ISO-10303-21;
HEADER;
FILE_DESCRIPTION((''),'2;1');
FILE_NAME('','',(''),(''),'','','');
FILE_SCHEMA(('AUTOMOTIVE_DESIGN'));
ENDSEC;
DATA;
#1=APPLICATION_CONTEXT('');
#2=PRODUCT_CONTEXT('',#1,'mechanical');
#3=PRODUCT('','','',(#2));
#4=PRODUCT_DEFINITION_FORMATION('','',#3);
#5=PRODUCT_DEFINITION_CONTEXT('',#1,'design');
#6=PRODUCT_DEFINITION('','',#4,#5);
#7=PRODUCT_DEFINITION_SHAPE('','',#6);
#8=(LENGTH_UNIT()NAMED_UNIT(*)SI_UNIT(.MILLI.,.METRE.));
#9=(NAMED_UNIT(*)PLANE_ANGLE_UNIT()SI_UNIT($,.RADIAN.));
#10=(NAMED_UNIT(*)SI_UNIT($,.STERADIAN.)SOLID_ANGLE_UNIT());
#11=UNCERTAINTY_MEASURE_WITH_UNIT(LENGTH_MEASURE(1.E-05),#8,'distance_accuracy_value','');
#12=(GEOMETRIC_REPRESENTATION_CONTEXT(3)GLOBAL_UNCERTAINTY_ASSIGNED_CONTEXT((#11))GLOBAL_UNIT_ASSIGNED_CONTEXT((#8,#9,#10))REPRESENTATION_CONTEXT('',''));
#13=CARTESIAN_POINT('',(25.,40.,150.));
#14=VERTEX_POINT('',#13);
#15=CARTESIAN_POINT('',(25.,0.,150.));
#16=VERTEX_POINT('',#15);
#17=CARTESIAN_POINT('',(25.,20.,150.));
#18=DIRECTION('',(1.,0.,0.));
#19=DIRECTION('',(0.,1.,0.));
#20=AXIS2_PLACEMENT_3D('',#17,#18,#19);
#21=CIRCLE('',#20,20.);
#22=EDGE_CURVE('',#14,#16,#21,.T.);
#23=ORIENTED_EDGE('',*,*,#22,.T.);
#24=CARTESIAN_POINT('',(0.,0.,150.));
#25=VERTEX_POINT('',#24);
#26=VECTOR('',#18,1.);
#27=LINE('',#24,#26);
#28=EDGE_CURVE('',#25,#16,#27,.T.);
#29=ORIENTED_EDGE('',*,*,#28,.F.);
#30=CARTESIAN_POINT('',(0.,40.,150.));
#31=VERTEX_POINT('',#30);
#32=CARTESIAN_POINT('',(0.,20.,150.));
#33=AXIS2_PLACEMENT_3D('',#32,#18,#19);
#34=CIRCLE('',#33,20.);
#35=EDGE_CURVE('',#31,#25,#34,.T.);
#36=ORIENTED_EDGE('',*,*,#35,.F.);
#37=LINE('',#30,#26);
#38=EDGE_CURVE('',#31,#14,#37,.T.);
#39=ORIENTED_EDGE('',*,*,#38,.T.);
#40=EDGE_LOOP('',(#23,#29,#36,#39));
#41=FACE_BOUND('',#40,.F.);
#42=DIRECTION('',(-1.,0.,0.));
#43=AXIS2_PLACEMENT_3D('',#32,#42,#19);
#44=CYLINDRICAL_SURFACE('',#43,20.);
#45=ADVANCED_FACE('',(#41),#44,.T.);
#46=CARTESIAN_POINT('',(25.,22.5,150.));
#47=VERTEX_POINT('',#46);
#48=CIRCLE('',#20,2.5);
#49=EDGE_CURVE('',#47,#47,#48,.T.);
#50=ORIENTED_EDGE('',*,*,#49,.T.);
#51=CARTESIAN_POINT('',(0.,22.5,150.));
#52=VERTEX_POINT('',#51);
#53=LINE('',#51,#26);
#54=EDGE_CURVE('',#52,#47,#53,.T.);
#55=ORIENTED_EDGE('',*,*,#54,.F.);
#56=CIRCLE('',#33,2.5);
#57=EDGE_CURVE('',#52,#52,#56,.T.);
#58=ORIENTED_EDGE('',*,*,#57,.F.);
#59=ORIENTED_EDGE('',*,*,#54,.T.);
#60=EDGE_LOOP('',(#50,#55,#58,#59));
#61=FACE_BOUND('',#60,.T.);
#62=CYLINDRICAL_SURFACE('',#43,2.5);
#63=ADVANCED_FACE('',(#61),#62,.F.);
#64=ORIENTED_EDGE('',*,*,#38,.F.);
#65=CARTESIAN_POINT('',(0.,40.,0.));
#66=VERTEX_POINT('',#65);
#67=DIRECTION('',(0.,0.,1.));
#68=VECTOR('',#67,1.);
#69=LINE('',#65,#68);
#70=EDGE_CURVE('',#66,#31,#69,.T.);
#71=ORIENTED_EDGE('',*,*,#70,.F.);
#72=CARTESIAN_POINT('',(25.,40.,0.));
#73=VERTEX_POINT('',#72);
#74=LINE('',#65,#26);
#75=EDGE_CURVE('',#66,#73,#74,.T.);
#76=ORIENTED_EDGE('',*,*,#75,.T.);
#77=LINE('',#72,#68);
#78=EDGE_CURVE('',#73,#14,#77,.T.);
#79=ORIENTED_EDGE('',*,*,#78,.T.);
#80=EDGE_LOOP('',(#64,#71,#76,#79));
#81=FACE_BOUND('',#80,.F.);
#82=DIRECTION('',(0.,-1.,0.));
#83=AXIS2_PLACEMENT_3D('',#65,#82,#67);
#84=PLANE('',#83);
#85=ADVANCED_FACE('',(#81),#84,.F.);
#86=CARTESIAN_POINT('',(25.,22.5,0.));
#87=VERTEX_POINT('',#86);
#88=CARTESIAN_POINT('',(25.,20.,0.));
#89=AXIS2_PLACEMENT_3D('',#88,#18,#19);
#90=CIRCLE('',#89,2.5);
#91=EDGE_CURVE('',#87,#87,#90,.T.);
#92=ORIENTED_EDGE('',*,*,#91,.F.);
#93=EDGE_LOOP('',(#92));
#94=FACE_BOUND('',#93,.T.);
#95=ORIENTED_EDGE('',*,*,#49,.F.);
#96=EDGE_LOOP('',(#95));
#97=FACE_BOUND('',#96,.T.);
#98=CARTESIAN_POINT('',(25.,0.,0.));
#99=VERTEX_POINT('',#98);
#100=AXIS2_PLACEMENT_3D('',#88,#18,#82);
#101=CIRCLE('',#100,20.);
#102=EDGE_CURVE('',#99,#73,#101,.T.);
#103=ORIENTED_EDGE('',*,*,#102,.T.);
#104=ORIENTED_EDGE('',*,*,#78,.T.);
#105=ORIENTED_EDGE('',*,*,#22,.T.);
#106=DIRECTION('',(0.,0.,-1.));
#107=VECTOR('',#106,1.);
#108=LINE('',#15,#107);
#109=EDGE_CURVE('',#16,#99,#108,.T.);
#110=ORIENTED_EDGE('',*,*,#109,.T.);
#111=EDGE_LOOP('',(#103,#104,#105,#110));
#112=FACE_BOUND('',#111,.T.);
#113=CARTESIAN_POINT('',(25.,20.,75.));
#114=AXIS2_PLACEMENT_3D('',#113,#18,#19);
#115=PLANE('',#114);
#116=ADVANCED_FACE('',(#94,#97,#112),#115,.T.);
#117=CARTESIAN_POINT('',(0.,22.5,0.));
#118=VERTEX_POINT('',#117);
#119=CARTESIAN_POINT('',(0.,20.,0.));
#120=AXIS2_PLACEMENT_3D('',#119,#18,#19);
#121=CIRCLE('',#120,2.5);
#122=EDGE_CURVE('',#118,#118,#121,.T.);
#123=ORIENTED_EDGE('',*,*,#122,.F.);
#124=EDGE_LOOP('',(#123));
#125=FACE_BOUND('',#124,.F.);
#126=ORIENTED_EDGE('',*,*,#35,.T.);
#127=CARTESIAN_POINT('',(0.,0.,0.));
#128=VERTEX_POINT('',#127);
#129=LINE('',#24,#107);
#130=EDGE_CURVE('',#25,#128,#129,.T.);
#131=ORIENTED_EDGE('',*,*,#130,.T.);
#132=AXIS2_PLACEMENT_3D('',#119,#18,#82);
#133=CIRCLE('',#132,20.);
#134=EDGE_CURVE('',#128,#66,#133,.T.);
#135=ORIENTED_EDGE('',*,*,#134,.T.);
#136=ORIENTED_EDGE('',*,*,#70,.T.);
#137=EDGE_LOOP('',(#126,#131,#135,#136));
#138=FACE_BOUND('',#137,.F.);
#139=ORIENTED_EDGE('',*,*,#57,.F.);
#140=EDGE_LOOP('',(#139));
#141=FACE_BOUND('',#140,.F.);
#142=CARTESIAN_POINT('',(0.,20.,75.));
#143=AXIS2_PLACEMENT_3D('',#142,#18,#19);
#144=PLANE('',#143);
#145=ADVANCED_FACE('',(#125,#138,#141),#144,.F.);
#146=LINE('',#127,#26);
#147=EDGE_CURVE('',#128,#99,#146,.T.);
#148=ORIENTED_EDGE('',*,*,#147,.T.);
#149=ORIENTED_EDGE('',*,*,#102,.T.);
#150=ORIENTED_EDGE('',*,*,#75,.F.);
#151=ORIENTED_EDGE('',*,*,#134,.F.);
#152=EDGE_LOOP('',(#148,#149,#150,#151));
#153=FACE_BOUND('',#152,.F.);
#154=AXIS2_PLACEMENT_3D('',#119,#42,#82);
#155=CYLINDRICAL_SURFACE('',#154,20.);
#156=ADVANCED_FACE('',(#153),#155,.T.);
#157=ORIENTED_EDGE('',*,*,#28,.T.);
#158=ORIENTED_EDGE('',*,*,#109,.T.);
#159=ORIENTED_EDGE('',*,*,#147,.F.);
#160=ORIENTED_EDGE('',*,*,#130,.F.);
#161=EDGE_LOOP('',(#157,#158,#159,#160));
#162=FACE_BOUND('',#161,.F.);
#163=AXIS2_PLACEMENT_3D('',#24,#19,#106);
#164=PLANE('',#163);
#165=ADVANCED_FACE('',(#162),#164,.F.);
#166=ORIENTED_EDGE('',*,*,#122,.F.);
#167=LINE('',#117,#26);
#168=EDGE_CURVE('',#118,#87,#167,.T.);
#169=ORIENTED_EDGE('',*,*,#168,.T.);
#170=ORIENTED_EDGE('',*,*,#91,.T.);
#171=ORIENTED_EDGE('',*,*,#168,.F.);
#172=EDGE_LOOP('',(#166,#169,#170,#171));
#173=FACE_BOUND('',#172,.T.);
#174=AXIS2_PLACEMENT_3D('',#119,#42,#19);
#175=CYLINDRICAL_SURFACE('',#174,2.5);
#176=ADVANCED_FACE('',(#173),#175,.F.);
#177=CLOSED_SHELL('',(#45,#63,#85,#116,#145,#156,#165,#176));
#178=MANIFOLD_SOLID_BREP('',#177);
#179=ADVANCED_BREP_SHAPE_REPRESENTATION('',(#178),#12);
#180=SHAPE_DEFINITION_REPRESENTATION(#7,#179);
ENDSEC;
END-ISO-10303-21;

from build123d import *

# Parameters (mm, degrees)
F0_R     = 2.5
F1_DEPTH = 25


# Not quite as in the source:
# - the program builds the solid bodies; features that only make, move or delete a surface that nothing else refers to are left out


with BuildPart() as f1:
    # F0 (on Right) → F1 (new body)
    with BuildSketch(Plane.YZ):
        with BuildLine():
            Line((0, 150), (0, 0))
            ThreePointArc((0, 0), (20, -20), (40, 0))
            Line((40, 0), (40, 150))
            ThreePointArc((40, 150), (20, 170), (0, 150))
        make_face()
        with Locations((20, 0)):
            Circle(F0_R, mode=Mode.SUBTRACT)
        with Locations((20, 150)):
            Circle(F0_R, mode=Mode.SUBTRACT)
    extrude(amount=F1_DEPTH)


solid = f1.part
